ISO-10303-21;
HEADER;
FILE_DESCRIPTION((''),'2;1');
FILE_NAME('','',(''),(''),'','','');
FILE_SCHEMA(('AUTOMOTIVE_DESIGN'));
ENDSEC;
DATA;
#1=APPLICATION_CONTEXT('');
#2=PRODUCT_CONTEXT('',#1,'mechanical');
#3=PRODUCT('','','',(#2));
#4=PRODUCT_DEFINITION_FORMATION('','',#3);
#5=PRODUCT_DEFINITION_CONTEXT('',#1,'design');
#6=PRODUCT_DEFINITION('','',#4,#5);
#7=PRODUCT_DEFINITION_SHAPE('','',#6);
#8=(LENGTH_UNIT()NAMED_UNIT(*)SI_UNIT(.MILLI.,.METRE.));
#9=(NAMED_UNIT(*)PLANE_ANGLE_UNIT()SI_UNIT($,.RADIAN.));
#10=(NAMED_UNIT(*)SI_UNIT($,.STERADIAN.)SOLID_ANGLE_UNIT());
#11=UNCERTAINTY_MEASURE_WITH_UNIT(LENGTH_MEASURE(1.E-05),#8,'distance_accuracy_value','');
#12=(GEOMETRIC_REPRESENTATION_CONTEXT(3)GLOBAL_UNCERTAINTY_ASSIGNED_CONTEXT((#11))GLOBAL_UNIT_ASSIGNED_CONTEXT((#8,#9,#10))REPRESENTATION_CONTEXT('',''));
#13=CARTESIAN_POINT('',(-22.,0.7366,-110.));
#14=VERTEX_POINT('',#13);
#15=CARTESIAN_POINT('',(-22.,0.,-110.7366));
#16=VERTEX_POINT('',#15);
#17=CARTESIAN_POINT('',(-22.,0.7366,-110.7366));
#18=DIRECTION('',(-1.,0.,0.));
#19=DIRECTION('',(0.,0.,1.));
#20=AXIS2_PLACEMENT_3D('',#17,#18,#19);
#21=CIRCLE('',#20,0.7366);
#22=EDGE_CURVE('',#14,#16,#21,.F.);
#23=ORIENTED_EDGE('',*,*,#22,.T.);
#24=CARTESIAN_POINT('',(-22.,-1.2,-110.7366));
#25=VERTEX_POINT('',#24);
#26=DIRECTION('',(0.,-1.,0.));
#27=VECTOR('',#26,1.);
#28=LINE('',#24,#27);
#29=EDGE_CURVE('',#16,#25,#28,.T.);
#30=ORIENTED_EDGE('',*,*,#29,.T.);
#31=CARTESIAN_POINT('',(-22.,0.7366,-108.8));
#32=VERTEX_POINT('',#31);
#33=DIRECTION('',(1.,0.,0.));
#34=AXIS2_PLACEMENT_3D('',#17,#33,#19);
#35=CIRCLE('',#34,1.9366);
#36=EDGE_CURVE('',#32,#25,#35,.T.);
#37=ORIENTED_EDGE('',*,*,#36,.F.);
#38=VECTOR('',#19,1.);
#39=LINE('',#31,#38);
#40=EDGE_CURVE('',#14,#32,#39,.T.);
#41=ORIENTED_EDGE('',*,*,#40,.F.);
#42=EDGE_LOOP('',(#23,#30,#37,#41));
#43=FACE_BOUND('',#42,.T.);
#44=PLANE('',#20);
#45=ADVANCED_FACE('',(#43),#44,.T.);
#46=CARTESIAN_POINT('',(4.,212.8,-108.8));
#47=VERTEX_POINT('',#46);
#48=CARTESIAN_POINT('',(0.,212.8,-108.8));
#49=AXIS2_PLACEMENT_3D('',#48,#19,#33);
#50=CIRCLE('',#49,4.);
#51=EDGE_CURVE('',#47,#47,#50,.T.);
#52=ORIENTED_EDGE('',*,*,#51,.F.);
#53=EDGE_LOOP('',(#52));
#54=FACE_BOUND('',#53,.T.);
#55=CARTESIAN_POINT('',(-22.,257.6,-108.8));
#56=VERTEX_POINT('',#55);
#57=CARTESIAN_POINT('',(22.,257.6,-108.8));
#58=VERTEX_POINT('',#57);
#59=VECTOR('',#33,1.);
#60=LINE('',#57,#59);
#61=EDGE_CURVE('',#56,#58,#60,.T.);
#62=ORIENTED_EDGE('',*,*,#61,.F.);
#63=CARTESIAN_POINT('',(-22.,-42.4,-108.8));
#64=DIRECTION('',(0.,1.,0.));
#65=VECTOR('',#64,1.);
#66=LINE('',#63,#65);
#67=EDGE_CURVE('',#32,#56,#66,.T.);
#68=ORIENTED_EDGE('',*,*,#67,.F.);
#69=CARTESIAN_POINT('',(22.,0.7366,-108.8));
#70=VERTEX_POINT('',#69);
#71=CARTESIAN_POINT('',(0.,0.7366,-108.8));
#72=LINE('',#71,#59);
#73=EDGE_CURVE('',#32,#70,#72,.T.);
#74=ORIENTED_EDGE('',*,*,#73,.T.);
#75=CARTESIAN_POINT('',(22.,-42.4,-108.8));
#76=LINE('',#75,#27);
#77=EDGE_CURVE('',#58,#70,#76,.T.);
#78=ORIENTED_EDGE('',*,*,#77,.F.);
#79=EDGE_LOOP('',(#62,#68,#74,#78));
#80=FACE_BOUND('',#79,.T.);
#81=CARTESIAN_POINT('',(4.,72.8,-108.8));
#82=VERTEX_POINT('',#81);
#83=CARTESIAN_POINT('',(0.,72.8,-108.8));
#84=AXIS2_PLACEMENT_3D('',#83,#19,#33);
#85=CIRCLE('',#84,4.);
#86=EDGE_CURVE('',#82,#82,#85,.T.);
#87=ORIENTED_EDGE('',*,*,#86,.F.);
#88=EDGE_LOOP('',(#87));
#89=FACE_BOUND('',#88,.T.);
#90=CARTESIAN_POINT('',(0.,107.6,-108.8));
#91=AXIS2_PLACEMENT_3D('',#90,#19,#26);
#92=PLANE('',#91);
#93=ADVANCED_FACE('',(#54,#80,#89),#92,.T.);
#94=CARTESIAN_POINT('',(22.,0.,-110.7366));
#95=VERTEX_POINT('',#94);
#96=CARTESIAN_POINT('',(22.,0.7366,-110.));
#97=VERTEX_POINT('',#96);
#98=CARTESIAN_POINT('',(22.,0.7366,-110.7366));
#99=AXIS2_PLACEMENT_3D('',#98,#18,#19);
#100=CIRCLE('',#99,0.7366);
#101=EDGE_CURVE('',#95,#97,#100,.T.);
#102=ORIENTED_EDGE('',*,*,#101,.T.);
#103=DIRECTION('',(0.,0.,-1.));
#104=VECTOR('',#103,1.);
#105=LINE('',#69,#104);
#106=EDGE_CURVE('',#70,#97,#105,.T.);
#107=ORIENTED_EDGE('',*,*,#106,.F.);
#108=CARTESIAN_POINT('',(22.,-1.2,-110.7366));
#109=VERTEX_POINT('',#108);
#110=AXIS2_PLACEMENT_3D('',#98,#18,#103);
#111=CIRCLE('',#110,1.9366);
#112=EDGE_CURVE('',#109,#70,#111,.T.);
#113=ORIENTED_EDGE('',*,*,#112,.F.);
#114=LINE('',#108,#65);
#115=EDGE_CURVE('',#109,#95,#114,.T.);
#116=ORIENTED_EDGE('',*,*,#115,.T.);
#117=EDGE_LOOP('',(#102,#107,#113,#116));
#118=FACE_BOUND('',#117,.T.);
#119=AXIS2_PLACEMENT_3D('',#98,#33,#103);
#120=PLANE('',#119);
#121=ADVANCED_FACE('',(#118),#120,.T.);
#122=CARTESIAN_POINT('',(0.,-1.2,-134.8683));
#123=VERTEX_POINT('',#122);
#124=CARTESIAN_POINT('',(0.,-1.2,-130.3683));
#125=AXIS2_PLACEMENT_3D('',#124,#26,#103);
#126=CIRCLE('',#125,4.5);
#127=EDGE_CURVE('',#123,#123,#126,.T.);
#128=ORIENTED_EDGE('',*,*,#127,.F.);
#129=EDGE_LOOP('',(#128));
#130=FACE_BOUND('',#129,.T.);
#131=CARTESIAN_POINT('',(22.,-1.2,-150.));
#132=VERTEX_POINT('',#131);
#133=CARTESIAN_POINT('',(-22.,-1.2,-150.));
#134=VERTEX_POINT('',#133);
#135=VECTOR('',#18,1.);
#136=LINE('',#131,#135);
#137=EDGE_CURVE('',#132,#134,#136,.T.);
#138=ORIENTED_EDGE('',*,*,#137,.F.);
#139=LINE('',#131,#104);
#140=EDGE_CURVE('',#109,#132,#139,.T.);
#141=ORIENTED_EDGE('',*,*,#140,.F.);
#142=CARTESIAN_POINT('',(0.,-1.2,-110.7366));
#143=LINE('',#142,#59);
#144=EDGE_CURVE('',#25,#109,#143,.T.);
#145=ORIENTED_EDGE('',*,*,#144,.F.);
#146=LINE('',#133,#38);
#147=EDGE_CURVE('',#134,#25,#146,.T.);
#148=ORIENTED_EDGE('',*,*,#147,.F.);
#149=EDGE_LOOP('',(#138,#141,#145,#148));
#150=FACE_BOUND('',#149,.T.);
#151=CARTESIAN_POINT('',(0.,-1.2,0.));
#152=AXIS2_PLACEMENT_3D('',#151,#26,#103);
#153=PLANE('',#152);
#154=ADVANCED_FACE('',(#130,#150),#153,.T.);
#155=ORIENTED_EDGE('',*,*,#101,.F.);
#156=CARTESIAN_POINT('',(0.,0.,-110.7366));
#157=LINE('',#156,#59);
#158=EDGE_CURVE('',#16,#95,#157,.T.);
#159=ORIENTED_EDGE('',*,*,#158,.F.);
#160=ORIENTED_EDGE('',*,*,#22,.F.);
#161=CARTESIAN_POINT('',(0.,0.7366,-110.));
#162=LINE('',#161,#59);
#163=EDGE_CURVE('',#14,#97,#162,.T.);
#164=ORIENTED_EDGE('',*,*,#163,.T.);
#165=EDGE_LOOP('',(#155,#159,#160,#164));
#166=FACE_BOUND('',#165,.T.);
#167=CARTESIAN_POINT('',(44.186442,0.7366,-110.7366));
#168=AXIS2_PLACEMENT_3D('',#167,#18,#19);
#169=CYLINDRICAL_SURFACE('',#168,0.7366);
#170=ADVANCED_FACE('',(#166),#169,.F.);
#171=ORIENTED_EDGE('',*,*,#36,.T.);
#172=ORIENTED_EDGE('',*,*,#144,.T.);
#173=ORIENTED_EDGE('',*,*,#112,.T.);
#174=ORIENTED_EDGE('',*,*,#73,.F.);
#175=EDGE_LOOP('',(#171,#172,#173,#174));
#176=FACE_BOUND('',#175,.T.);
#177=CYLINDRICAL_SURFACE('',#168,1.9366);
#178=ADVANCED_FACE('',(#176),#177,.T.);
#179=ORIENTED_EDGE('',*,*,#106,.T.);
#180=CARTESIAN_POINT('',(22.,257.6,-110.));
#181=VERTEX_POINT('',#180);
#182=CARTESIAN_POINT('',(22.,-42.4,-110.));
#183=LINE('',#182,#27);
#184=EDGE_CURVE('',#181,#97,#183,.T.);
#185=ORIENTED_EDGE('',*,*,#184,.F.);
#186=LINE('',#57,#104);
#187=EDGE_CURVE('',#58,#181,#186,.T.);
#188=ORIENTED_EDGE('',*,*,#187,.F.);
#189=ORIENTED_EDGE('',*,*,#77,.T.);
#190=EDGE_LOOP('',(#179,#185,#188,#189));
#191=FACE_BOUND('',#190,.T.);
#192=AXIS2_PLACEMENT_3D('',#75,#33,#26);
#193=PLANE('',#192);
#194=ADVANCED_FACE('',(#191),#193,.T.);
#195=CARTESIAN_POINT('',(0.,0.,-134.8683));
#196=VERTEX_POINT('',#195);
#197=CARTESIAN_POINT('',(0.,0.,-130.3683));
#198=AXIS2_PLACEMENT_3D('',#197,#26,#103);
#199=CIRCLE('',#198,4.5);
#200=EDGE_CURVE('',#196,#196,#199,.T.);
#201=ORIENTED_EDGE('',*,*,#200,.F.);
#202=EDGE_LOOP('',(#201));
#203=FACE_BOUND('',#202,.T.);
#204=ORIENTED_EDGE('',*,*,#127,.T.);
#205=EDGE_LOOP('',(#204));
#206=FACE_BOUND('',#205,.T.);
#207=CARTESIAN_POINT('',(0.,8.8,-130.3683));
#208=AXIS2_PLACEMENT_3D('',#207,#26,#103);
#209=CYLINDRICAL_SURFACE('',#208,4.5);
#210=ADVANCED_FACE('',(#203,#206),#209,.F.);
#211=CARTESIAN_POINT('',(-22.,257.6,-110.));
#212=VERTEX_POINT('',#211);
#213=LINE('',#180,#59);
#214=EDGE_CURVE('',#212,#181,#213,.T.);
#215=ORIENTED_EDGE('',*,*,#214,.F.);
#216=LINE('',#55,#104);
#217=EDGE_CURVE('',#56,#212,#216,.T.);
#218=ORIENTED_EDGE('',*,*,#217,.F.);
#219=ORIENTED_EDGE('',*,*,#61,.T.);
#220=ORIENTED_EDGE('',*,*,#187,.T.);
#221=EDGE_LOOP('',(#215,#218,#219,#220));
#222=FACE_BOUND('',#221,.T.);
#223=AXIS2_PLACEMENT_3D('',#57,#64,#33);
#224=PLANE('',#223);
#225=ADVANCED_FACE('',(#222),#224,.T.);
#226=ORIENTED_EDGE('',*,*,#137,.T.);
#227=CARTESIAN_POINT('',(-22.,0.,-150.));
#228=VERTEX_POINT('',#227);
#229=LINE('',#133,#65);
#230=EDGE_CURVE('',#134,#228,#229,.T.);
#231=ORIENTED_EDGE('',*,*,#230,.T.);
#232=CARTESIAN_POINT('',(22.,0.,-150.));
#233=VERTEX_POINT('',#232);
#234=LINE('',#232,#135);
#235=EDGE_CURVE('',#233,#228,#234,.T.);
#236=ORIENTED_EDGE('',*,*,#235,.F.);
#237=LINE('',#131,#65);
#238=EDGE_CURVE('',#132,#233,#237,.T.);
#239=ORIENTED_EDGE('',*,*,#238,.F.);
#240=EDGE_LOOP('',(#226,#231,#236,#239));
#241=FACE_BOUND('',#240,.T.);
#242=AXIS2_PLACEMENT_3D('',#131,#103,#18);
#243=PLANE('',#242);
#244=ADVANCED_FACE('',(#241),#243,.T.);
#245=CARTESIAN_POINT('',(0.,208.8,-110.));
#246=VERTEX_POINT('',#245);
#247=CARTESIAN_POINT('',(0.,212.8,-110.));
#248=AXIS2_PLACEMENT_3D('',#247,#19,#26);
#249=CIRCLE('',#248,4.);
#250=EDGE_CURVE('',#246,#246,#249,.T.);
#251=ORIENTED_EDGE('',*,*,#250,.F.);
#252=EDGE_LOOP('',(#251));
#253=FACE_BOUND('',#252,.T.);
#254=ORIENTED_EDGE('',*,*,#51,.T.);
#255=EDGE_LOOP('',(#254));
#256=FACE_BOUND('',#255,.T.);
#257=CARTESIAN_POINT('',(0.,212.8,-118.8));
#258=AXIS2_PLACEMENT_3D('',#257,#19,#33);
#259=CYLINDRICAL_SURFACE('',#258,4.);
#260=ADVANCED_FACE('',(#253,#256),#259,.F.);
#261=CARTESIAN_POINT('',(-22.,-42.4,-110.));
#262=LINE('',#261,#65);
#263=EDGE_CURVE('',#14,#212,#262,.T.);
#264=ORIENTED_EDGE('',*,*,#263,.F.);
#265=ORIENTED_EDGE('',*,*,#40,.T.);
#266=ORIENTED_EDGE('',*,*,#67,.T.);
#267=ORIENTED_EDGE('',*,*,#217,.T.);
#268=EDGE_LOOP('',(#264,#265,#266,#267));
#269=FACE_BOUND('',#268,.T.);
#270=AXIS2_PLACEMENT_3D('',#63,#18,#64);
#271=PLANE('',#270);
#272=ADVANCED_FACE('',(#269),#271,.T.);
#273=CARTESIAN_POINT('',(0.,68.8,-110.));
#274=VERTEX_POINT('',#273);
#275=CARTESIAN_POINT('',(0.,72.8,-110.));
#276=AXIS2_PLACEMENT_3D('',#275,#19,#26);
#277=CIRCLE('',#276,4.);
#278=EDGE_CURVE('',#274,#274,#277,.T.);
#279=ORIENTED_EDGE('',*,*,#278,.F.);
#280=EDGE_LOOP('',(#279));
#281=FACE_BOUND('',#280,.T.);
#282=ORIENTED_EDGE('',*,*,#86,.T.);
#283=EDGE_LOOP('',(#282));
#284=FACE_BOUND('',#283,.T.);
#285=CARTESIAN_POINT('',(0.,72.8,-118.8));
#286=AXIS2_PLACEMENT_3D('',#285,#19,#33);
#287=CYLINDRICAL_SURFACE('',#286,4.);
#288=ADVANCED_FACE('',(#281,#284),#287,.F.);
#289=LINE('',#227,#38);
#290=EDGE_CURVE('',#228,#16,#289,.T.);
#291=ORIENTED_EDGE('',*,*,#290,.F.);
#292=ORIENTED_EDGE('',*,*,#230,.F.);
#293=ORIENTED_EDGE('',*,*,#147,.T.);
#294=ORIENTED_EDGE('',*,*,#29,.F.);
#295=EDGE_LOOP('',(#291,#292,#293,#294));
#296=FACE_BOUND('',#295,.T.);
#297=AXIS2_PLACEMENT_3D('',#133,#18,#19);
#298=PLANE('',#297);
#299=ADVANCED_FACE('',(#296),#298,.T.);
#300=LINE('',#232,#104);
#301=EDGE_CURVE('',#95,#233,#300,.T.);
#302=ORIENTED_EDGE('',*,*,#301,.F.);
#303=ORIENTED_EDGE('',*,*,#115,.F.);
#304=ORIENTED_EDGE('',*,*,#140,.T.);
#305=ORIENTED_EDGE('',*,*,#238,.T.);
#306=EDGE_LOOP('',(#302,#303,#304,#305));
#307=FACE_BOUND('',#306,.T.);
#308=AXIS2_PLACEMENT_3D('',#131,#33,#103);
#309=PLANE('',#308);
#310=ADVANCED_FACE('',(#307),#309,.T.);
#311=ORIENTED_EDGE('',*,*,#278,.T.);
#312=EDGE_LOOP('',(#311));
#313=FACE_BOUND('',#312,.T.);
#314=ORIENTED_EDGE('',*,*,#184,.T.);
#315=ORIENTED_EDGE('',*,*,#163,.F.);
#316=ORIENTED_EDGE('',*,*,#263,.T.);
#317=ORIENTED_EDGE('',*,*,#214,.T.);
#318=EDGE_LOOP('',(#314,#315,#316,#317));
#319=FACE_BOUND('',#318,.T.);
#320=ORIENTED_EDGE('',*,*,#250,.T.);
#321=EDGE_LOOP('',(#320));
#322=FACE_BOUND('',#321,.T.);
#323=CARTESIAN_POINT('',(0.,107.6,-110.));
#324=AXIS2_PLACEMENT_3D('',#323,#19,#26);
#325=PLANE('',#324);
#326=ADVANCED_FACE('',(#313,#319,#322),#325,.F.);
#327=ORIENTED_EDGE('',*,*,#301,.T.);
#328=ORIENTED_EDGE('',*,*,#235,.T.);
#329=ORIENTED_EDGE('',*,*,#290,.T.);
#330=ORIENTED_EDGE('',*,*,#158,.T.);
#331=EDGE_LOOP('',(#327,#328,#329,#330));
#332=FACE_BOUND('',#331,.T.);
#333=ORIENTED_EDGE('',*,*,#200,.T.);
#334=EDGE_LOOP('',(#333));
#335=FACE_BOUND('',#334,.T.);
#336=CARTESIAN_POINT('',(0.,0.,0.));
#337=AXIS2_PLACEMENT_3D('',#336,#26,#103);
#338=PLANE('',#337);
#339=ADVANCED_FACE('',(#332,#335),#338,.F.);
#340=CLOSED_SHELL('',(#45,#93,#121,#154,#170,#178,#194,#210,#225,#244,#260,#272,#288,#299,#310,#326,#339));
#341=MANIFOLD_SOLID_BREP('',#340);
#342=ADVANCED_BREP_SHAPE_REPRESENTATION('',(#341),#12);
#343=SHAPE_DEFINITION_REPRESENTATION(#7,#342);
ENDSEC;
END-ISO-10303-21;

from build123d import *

# Parameters (mm, degrees)
SKETCH1_W              = 44
SKETCH1_H              = 300
BASE_FLANGE1_DEPTH     = 1.2
SKETCHED_START         = -22
SKETCHED_BEND1_DEPTH   = 44
SKETCHED_BEND1_2_DEPTH = 44
SKETCH7_R              = 4
CUT_EXTRUDE1_DEPTH     = 10
SKETCH9_R              = 4.5
CUT_EXTRUDE2_DEPTH     = 10


# Read off the part's stored shape, not the designer's step: Sketched Bend1
# Sheet-metal steps are written as plain solids
with BuildPart() as part:
    # Sketch1 → Base-Flange1 (new body)
    with BuildSketch(Plane(origin=(0, 0, 0), x_dir=(1, 0, 0), z_dir=(0, 1, 0))):
        Rectangle(SKETCH1_W, SKETCH1_H)
    extrude(amount=-BASE_FLANGE1_DEPTH)

    # Sketched Bend1 outline → Sketched Bend1 (cut)
    with BuildSketch(Plane.YZ.offset(SKETCHED_START)):
        with BuildLine():
            ThreePointArc((-1.2, -110.7366), (-0.872269031, -109.658657516), (0, -108.945555612))
            Line((0, -108.945555612), (0, 150))
            Line((0, 150), (-1.2, 150))
            Line((-1.2, 150), (-1.2, -110.7366))
        make_face()
    extrude(amount=SKETCHED_BEND1_DEPTH, mode=Mode.SUBTRACT)

    # Sketched Bend1 2 outline → Sketched Bend1 2 (add)
    with BuildSketch(Plane.YZ.offset(SKETCHED_START)):
        with BuildLine():
            Line((257.6, -110), (257.6, -108.8))
            Line((257.6, -108.8), (0.7366, -108.8))
            ThreePointArc((0.7366, -108.8), (0.361178238, -108.836737358), (0, -108.945555612))
            Line((0, -108.945555612), (0, -110.7366))
            ThreePointArc((0, -110.7366), (0.215745145, -110.215745145), (0.7366, -110))
            Line((0.7366, -110), (257.6, -110))
        make_face()
    extrude(amount=SKETCHED_BEND1_2_DEPTH)

    # Sketch7 → Cut-Extrude1 (cut)
    with BuildSketch(Plane.XY.offset(-108.8)):
        with Locations((0, 72.8)):
            Circle(SKETCH7_R)
        with Locations((0, 212.8)):
            Circle(SKETCH7_R)
    extrude(amount=-CUT_EXTRUDE1_DEPTH, mode=Mode.SUBTRACT)

    # Sketch9 → Cut-Extrude2 (cut)
    with BuildSketch(Plane.XZ.offset(1.2)):
        with Locations(Location((0, -130.3683, 0), (0, 0, 270))):
            Circle(SKETCH9_R)
    extrude(amount=-CUT_EXTRUDE2_DEPTH, mode=Mode.SUBTRACT)


solid = part.part
